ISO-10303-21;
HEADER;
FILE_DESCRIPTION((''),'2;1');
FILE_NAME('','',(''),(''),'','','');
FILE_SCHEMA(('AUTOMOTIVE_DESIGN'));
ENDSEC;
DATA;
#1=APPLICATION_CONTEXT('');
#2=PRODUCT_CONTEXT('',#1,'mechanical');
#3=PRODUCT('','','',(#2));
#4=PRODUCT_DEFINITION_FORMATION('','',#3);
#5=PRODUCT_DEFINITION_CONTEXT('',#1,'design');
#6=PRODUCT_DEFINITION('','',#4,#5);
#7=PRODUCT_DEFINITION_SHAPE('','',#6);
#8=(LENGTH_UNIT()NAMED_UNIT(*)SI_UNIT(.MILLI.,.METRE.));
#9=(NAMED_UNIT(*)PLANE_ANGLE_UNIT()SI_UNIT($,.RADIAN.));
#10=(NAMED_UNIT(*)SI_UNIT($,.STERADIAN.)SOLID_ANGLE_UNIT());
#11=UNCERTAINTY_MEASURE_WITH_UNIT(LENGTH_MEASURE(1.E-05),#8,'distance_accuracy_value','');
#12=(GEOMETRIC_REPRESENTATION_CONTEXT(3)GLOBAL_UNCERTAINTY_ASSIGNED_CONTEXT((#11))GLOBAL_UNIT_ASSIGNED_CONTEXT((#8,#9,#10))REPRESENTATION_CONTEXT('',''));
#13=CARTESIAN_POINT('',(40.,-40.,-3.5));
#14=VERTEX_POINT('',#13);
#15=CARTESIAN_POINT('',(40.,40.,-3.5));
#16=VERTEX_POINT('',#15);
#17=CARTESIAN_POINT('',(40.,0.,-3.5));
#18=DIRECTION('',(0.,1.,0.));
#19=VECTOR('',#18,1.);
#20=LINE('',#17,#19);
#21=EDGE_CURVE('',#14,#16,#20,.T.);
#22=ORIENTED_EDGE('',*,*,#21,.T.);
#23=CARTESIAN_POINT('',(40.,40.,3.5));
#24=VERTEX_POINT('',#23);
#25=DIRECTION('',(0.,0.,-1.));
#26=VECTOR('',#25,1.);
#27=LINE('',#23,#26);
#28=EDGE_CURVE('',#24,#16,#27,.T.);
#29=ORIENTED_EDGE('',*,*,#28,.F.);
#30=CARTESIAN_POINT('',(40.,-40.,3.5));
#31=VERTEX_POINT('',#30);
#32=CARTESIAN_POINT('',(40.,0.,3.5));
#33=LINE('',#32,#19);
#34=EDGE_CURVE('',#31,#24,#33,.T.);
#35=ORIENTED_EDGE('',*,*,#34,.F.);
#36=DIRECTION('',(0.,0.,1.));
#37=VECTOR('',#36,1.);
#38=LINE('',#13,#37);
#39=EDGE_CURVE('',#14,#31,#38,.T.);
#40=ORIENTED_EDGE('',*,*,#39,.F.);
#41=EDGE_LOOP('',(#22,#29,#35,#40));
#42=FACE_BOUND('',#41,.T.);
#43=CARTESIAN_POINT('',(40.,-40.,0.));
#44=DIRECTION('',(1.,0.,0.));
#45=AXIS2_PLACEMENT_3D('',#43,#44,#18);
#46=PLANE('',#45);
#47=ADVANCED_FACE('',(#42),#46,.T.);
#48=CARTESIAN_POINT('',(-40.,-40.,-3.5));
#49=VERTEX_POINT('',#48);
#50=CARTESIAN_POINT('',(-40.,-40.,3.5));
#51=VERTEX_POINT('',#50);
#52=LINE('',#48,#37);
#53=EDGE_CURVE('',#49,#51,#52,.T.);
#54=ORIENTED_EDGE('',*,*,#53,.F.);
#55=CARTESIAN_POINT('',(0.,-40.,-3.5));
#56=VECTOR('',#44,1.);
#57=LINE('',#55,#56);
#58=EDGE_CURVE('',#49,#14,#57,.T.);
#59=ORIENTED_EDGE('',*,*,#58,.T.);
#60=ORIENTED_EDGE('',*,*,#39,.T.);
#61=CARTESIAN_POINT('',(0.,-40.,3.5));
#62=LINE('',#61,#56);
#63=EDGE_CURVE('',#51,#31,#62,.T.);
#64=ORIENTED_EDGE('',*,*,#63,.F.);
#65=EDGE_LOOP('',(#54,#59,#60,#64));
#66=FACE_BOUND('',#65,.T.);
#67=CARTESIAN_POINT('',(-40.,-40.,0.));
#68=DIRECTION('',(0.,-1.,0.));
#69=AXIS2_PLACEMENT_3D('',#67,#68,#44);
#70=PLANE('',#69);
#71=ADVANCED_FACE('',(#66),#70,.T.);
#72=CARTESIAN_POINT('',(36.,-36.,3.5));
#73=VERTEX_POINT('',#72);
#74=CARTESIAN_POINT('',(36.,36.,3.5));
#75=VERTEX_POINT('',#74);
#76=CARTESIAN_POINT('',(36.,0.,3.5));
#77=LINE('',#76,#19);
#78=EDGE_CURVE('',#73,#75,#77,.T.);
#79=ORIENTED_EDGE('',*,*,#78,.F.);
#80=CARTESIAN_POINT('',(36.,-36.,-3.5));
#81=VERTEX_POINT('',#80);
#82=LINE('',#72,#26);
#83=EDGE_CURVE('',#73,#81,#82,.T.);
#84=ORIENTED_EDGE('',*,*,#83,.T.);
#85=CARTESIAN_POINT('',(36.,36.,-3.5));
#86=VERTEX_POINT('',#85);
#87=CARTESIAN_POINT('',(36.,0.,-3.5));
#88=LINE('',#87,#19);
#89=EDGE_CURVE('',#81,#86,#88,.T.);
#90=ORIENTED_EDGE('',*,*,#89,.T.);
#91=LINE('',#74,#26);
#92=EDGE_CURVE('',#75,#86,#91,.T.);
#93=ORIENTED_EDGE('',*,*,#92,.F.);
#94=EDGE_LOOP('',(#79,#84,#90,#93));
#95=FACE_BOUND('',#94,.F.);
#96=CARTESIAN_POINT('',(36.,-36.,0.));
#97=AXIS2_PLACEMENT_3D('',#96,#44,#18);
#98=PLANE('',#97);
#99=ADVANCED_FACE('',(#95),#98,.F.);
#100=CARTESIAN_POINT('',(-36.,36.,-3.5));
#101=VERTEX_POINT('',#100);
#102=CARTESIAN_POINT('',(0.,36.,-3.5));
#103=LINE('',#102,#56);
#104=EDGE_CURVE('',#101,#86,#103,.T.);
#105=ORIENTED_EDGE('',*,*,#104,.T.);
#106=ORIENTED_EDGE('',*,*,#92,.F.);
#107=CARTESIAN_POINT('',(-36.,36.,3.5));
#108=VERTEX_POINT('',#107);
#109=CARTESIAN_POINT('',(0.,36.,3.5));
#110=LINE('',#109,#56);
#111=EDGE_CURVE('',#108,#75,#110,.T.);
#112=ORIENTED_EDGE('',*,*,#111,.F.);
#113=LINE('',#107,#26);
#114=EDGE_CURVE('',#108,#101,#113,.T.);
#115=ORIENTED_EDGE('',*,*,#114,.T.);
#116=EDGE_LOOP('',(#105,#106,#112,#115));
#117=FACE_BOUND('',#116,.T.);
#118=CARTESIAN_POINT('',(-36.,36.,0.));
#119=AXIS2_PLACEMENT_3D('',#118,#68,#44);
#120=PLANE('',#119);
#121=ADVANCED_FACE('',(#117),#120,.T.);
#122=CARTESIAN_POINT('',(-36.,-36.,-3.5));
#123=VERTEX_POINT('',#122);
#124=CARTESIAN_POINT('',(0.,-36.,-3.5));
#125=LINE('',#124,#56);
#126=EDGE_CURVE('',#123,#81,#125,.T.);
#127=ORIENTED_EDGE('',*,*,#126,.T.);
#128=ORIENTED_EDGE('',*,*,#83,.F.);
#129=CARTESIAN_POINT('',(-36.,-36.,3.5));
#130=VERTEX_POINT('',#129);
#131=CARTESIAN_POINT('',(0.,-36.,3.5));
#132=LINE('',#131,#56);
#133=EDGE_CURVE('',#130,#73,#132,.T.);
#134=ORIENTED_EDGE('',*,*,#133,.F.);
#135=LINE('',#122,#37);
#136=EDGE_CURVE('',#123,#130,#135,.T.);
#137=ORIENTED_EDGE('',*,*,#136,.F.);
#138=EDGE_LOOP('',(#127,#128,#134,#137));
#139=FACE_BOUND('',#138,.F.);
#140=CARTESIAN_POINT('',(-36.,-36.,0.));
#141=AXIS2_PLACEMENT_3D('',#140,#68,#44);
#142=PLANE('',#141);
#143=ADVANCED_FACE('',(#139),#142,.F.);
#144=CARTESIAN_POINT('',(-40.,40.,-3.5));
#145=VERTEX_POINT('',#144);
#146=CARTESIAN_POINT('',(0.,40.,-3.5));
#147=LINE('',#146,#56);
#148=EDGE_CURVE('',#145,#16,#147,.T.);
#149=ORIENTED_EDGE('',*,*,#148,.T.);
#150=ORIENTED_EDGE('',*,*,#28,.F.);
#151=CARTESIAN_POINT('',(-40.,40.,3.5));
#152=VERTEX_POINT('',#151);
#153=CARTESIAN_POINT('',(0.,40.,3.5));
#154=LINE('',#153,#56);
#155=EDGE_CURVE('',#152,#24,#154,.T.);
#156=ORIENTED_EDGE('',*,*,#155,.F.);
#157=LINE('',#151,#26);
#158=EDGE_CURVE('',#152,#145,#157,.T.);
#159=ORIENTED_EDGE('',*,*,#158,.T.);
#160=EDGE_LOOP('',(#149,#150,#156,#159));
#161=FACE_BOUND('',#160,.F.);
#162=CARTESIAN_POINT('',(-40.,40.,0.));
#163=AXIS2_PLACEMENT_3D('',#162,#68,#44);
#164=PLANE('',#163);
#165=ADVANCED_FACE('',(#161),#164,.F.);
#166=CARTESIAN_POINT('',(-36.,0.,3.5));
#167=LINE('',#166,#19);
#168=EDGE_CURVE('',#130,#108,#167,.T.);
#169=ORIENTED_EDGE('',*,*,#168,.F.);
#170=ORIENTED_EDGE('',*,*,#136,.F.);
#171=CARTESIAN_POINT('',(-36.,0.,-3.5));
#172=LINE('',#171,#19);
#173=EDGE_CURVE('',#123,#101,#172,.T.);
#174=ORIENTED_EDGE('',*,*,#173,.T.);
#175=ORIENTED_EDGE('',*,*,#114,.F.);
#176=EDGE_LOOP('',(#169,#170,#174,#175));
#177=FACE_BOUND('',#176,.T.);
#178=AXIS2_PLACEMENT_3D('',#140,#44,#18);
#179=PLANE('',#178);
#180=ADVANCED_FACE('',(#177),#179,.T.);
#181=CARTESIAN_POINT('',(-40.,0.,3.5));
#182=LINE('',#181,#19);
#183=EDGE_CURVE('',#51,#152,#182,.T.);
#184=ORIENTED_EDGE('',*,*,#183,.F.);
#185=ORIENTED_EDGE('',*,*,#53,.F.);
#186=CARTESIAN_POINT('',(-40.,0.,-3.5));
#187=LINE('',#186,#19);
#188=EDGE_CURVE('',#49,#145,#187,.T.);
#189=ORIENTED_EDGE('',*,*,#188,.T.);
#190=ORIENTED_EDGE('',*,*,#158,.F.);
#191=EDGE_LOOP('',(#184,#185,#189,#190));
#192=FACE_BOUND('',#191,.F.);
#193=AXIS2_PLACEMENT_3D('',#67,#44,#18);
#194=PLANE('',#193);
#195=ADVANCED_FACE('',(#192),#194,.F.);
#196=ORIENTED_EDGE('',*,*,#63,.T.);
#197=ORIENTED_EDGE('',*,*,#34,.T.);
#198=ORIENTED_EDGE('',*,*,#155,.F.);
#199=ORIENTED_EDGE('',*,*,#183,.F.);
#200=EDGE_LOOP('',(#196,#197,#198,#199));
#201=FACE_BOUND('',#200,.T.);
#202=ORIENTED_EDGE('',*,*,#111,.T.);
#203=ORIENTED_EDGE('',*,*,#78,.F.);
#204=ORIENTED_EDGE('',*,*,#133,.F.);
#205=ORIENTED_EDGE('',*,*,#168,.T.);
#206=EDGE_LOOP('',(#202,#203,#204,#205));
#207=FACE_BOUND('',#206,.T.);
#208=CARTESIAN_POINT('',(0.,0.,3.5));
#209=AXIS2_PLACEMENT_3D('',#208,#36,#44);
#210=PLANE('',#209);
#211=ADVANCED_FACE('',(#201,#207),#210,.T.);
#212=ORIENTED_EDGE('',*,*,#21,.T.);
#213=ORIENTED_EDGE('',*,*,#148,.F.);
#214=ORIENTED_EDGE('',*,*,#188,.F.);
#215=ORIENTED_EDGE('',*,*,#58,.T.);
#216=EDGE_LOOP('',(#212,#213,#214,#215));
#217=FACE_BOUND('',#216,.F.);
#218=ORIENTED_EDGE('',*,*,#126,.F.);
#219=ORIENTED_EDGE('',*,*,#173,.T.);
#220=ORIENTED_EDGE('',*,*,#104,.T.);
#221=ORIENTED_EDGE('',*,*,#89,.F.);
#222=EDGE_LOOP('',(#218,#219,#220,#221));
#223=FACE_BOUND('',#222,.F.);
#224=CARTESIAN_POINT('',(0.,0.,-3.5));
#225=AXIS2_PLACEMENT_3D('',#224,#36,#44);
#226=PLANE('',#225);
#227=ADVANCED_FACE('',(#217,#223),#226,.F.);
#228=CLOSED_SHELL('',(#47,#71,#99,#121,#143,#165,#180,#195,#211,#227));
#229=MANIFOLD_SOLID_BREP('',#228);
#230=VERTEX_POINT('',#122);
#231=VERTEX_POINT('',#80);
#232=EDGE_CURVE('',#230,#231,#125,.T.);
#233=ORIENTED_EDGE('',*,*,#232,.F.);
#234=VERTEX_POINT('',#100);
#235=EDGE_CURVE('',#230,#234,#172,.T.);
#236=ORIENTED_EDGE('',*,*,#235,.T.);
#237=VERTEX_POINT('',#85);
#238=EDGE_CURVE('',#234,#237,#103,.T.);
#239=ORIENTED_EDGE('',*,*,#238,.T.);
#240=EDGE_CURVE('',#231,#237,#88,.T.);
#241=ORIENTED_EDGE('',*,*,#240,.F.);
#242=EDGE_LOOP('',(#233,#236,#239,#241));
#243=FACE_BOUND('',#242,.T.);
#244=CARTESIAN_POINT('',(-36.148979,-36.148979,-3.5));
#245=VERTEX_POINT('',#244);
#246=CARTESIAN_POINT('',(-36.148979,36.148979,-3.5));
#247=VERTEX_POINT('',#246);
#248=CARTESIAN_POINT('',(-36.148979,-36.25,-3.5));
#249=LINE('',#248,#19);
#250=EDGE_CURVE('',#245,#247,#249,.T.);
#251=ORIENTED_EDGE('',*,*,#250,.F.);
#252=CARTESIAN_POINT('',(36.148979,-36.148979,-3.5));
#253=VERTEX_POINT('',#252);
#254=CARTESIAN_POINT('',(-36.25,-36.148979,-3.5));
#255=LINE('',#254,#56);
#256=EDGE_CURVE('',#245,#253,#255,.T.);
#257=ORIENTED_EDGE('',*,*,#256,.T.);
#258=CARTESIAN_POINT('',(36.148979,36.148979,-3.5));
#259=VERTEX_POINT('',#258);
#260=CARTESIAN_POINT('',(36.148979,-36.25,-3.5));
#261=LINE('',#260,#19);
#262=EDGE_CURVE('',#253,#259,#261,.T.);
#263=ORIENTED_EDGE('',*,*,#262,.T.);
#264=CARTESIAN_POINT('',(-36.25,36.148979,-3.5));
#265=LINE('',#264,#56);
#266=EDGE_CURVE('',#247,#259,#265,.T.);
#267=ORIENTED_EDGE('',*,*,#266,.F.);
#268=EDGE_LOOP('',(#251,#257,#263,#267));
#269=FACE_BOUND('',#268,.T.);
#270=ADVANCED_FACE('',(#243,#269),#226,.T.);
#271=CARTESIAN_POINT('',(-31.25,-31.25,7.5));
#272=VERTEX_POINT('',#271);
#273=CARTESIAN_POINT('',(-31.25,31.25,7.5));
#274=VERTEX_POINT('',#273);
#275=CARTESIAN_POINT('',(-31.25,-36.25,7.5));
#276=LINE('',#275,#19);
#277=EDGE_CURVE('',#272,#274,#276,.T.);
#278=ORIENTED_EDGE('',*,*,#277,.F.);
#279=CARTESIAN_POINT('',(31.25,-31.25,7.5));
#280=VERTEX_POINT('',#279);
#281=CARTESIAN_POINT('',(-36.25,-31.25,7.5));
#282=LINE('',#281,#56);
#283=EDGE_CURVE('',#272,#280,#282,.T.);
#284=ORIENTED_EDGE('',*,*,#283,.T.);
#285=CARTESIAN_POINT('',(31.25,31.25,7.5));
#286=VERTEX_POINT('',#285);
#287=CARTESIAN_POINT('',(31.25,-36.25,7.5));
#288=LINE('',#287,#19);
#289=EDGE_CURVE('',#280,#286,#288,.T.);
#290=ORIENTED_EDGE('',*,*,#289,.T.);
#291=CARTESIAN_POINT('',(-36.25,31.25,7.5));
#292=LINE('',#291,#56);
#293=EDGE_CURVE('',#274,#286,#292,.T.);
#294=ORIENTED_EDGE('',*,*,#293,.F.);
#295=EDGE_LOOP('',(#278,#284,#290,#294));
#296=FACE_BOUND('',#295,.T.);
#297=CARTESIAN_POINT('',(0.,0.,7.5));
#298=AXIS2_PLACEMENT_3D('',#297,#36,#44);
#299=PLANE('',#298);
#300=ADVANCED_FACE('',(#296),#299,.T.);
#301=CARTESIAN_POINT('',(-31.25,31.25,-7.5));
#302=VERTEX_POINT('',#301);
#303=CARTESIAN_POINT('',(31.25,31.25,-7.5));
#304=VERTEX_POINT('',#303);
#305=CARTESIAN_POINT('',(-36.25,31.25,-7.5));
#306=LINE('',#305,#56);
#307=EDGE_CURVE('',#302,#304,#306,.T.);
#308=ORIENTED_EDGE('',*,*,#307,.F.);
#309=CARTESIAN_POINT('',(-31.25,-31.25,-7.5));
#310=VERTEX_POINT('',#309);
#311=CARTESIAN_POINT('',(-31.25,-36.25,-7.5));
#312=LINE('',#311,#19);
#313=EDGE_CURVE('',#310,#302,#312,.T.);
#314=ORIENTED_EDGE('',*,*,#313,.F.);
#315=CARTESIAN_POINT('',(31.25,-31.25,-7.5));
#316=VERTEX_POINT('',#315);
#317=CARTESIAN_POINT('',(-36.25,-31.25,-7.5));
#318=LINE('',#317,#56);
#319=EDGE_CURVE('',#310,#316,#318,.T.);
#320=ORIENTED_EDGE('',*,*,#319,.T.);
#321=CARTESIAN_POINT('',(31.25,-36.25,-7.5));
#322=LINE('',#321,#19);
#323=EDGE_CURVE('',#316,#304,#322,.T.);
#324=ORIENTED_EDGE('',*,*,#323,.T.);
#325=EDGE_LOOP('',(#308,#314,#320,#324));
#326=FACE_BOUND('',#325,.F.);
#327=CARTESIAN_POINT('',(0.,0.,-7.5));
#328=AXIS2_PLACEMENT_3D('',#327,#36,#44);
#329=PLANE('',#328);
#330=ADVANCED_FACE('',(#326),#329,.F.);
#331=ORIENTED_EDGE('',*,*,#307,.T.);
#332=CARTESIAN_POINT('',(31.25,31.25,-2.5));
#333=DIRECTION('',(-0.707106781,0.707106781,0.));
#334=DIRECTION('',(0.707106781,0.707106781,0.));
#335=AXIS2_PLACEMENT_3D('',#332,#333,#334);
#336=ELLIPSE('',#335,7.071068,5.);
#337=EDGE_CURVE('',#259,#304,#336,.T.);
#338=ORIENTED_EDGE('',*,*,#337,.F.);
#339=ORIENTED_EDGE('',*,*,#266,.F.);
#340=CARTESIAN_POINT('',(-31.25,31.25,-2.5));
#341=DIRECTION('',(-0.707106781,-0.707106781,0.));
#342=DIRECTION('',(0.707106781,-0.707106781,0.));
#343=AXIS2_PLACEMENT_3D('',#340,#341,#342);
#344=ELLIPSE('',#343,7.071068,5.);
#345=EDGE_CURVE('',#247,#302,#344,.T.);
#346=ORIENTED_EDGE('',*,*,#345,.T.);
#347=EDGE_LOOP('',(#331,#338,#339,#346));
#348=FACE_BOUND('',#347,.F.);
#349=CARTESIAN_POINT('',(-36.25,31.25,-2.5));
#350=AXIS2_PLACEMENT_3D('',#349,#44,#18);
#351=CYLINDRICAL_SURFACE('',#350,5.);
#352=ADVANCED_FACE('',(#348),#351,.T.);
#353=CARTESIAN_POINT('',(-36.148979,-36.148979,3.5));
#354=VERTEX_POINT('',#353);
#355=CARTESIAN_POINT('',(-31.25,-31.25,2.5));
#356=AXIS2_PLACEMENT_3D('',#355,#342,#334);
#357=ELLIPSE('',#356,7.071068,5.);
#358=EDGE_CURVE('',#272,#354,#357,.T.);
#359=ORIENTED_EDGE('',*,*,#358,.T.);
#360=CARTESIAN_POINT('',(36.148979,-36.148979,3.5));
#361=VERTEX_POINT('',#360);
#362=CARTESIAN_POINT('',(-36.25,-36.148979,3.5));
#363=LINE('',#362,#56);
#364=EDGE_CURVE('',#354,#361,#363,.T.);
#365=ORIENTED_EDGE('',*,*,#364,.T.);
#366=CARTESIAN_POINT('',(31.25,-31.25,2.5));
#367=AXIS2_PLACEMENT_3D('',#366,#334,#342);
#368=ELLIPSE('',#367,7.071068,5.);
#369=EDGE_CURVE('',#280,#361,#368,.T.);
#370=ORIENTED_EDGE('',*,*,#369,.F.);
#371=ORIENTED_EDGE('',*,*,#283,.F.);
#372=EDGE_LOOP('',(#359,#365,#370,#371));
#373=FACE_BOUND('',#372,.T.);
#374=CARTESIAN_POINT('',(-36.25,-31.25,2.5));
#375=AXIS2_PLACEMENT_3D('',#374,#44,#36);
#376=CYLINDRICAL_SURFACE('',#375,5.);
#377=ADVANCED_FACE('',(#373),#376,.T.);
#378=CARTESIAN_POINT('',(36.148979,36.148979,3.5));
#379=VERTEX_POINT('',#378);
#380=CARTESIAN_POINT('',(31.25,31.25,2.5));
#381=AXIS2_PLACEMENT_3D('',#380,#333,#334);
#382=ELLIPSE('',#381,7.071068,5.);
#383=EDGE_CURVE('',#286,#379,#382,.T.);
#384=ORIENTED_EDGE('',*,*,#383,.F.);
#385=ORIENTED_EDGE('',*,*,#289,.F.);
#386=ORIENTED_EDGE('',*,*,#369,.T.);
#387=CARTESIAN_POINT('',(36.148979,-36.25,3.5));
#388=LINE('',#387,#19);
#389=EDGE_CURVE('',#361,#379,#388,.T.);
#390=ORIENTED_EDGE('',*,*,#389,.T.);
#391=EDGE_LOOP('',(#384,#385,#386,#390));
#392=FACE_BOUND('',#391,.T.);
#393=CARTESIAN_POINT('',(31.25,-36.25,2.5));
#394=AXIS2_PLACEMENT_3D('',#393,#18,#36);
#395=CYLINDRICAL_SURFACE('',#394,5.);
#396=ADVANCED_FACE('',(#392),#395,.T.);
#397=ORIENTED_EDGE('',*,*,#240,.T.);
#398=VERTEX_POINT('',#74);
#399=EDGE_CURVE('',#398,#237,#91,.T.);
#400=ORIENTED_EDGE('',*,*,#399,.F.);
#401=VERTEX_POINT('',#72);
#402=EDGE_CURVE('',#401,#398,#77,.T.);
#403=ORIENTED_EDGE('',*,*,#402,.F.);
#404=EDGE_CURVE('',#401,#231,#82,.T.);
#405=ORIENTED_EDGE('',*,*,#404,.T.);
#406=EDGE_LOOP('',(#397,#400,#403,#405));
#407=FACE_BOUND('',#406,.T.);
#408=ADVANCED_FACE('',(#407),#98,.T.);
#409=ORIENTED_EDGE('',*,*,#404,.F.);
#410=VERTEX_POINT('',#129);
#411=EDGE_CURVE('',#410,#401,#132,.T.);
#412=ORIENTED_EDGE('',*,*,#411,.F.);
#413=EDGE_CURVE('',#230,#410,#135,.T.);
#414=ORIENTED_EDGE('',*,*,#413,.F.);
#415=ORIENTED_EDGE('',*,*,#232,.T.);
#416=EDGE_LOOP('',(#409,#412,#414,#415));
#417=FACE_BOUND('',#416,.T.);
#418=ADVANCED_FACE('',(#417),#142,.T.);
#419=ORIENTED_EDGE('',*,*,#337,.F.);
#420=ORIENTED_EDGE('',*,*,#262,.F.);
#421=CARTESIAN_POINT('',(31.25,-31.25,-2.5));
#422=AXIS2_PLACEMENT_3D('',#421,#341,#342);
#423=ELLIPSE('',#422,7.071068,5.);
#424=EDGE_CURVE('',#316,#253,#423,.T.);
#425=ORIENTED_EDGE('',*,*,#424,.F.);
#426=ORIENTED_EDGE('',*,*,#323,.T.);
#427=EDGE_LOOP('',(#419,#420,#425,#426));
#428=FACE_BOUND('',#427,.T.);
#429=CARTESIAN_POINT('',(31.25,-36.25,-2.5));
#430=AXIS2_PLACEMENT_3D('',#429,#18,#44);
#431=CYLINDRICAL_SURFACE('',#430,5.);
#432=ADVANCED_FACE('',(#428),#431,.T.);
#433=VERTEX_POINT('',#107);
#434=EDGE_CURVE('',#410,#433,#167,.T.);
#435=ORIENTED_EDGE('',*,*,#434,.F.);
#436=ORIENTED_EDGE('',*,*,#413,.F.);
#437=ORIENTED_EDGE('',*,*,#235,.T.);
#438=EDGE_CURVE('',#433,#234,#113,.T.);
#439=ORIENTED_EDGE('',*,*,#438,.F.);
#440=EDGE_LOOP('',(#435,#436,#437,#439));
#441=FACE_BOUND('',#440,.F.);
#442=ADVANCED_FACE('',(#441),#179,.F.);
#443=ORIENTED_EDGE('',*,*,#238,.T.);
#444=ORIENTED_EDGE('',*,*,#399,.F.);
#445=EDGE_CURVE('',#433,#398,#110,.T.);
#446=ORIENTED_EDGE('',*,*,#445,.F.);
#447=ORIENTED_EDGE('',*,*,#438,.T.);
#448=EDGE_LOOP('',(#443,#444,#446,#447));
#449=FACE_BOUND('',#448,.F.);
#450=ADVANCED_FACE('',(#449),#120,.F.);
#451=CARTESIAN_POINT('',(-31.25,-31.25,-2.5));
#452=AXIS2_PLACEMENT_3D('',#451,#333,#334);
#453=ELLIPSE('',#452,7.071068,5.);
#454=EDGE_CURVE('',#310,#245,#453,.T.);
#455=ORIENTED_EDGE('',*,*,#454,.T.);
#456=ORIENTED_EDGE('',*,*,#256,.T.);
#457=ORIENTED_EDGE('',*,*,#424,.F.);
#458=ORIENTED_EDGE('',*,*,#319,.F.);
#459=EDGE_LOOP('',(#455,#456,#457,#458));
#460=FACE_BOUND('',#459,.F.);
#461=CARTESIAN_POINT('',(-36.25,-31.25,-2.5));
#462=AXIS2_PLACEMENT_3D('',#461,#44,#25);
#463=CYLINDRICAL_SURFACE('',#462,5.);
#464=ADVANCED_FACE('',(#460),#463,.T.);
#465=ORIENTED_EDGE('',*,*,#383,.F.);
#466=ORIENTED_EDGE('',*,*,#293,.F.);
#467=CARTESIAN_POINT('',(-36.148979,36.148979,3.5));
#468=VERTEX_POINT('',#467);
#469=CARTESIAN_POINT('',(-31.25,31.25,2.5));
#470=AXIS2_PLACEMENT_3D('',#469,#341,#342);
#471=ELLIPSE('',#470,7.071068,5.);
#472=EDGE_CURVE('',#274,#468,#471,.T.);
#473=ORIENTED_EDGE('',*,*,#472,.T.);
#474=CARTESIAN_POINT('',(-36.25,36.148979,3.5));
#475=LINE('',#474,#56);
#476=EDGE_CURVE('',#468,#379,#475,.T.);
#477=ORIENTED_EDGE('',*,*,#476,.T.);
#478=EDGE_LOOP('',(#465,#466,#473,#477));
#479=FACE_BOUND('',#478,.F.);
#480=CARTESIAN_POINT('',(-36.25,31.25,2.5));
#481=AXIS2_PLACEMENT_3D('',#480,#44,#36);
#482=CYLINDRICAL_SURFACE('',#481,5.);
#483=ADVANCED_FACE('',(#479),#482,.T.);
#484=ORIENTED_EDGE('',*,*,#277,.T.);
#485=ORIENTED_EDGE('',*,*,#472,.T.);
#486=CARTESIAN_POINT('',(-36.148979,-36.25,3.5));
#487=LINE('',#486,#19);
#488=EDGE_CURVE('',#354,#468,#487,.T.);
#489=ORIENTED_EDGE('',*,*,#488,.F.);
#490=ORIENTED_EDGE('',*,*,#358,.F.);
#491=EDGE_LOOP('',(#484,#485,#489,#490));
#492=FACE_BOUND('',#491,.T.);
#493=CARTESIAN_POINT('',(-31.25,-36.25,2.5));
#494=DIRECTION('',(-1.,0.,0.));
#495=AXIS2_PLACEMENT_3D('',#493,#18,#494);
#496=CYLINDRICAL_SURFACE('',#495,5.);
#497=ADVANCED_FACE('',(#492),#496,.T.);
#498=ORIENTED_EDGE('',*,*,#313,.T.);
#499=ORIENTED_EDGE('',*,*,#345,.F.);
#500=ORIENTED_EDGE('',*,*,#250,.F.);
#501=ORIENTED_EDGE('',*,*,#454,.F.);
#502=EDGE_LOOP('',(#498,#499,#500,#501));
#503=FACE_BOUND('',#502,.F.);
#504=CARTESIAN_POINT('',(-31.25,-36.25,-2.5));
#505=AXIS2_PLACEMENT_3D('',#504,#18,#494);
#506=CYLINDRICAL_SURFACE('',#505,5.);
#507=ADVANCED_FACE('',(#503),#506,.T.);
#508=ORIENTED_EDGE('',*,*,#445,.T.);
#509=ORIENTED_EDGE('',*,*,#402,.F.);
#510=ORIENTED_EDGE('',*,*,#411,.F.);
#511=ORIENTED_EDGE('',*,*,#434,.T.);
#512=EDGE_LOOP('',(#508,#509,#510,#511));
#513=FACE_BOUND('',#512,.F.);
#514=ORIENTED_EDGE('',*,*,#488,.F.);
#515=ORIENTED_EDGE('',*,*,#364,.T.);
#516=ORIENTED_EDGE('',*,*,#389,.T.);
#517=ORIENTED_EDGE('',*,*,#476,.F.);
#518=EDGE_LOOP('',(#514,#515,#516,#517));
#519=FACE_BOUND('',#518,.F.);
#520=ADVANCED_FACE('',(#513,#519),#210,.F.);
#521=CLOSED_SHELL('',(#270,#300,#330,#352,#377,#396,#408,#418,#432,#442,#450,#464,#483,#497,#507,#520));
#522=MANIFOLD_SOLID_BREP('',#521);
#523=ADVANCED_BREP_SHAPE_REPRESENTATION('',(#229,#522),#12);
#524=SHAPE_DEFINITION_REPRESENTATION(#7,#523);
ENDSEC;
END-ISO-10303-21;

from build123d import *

# Parameters (mm, degrees)
F2_W     = 80
F2_H     = 80
F2_W_2   = 72
F2_H_2   = 72
F3_DEPTH = 3.5
F4_W     = 72.5
F4_H     = 72.5
F5_DEPTH = 7.5
F6_R     = 5


with BuildPart() as f3:
    # F2 (on Top) → F3 (new body, symmetric)
    with BuildSketch(Plane.XY):
        Rectangle(F2_W, F2_H)
        Rectangle(F2_W_2, F2_H_2, mode=Mode.SUBTRACT)
    extrude(amount=F3_DEPTH, both=True)


with BuildPart() as f5:
    # F4 (on Top) → F5 (new body, symmetric)
    with BuildSketch(Plane.XY):
        Rectangle(F4_W, F4_H)
    extrude(amount=F5_DEPTH, both=True)

    # F6
    f6_edges = [f5.edges().sort_by_distance(p)[0] for p in [
        (0, -36.25, 7.5),
        (36.25, 0, 7.5),
        (0, 36.25, 7.5),
        (-36.25, 0, 7.5),
        (0, -36.25, -7.5),
        (36.25, 0, -7.5),
        (0, 36.25, -7.5),
        (-36.25, 0, -7.5),
    ]]
    fillet(f6_edges, radius=F6_R)


with BuildPart() as f7_1:
    # F7: copy of F3
    add(f3.part)


with BuildPart() as f5_1:
    add(f5.part)

    # F8: cut F7_1
    add(f7_1.part, mode=Mode.SUBTRACT)


solid = Compound([f3.part, f5_1.part])
